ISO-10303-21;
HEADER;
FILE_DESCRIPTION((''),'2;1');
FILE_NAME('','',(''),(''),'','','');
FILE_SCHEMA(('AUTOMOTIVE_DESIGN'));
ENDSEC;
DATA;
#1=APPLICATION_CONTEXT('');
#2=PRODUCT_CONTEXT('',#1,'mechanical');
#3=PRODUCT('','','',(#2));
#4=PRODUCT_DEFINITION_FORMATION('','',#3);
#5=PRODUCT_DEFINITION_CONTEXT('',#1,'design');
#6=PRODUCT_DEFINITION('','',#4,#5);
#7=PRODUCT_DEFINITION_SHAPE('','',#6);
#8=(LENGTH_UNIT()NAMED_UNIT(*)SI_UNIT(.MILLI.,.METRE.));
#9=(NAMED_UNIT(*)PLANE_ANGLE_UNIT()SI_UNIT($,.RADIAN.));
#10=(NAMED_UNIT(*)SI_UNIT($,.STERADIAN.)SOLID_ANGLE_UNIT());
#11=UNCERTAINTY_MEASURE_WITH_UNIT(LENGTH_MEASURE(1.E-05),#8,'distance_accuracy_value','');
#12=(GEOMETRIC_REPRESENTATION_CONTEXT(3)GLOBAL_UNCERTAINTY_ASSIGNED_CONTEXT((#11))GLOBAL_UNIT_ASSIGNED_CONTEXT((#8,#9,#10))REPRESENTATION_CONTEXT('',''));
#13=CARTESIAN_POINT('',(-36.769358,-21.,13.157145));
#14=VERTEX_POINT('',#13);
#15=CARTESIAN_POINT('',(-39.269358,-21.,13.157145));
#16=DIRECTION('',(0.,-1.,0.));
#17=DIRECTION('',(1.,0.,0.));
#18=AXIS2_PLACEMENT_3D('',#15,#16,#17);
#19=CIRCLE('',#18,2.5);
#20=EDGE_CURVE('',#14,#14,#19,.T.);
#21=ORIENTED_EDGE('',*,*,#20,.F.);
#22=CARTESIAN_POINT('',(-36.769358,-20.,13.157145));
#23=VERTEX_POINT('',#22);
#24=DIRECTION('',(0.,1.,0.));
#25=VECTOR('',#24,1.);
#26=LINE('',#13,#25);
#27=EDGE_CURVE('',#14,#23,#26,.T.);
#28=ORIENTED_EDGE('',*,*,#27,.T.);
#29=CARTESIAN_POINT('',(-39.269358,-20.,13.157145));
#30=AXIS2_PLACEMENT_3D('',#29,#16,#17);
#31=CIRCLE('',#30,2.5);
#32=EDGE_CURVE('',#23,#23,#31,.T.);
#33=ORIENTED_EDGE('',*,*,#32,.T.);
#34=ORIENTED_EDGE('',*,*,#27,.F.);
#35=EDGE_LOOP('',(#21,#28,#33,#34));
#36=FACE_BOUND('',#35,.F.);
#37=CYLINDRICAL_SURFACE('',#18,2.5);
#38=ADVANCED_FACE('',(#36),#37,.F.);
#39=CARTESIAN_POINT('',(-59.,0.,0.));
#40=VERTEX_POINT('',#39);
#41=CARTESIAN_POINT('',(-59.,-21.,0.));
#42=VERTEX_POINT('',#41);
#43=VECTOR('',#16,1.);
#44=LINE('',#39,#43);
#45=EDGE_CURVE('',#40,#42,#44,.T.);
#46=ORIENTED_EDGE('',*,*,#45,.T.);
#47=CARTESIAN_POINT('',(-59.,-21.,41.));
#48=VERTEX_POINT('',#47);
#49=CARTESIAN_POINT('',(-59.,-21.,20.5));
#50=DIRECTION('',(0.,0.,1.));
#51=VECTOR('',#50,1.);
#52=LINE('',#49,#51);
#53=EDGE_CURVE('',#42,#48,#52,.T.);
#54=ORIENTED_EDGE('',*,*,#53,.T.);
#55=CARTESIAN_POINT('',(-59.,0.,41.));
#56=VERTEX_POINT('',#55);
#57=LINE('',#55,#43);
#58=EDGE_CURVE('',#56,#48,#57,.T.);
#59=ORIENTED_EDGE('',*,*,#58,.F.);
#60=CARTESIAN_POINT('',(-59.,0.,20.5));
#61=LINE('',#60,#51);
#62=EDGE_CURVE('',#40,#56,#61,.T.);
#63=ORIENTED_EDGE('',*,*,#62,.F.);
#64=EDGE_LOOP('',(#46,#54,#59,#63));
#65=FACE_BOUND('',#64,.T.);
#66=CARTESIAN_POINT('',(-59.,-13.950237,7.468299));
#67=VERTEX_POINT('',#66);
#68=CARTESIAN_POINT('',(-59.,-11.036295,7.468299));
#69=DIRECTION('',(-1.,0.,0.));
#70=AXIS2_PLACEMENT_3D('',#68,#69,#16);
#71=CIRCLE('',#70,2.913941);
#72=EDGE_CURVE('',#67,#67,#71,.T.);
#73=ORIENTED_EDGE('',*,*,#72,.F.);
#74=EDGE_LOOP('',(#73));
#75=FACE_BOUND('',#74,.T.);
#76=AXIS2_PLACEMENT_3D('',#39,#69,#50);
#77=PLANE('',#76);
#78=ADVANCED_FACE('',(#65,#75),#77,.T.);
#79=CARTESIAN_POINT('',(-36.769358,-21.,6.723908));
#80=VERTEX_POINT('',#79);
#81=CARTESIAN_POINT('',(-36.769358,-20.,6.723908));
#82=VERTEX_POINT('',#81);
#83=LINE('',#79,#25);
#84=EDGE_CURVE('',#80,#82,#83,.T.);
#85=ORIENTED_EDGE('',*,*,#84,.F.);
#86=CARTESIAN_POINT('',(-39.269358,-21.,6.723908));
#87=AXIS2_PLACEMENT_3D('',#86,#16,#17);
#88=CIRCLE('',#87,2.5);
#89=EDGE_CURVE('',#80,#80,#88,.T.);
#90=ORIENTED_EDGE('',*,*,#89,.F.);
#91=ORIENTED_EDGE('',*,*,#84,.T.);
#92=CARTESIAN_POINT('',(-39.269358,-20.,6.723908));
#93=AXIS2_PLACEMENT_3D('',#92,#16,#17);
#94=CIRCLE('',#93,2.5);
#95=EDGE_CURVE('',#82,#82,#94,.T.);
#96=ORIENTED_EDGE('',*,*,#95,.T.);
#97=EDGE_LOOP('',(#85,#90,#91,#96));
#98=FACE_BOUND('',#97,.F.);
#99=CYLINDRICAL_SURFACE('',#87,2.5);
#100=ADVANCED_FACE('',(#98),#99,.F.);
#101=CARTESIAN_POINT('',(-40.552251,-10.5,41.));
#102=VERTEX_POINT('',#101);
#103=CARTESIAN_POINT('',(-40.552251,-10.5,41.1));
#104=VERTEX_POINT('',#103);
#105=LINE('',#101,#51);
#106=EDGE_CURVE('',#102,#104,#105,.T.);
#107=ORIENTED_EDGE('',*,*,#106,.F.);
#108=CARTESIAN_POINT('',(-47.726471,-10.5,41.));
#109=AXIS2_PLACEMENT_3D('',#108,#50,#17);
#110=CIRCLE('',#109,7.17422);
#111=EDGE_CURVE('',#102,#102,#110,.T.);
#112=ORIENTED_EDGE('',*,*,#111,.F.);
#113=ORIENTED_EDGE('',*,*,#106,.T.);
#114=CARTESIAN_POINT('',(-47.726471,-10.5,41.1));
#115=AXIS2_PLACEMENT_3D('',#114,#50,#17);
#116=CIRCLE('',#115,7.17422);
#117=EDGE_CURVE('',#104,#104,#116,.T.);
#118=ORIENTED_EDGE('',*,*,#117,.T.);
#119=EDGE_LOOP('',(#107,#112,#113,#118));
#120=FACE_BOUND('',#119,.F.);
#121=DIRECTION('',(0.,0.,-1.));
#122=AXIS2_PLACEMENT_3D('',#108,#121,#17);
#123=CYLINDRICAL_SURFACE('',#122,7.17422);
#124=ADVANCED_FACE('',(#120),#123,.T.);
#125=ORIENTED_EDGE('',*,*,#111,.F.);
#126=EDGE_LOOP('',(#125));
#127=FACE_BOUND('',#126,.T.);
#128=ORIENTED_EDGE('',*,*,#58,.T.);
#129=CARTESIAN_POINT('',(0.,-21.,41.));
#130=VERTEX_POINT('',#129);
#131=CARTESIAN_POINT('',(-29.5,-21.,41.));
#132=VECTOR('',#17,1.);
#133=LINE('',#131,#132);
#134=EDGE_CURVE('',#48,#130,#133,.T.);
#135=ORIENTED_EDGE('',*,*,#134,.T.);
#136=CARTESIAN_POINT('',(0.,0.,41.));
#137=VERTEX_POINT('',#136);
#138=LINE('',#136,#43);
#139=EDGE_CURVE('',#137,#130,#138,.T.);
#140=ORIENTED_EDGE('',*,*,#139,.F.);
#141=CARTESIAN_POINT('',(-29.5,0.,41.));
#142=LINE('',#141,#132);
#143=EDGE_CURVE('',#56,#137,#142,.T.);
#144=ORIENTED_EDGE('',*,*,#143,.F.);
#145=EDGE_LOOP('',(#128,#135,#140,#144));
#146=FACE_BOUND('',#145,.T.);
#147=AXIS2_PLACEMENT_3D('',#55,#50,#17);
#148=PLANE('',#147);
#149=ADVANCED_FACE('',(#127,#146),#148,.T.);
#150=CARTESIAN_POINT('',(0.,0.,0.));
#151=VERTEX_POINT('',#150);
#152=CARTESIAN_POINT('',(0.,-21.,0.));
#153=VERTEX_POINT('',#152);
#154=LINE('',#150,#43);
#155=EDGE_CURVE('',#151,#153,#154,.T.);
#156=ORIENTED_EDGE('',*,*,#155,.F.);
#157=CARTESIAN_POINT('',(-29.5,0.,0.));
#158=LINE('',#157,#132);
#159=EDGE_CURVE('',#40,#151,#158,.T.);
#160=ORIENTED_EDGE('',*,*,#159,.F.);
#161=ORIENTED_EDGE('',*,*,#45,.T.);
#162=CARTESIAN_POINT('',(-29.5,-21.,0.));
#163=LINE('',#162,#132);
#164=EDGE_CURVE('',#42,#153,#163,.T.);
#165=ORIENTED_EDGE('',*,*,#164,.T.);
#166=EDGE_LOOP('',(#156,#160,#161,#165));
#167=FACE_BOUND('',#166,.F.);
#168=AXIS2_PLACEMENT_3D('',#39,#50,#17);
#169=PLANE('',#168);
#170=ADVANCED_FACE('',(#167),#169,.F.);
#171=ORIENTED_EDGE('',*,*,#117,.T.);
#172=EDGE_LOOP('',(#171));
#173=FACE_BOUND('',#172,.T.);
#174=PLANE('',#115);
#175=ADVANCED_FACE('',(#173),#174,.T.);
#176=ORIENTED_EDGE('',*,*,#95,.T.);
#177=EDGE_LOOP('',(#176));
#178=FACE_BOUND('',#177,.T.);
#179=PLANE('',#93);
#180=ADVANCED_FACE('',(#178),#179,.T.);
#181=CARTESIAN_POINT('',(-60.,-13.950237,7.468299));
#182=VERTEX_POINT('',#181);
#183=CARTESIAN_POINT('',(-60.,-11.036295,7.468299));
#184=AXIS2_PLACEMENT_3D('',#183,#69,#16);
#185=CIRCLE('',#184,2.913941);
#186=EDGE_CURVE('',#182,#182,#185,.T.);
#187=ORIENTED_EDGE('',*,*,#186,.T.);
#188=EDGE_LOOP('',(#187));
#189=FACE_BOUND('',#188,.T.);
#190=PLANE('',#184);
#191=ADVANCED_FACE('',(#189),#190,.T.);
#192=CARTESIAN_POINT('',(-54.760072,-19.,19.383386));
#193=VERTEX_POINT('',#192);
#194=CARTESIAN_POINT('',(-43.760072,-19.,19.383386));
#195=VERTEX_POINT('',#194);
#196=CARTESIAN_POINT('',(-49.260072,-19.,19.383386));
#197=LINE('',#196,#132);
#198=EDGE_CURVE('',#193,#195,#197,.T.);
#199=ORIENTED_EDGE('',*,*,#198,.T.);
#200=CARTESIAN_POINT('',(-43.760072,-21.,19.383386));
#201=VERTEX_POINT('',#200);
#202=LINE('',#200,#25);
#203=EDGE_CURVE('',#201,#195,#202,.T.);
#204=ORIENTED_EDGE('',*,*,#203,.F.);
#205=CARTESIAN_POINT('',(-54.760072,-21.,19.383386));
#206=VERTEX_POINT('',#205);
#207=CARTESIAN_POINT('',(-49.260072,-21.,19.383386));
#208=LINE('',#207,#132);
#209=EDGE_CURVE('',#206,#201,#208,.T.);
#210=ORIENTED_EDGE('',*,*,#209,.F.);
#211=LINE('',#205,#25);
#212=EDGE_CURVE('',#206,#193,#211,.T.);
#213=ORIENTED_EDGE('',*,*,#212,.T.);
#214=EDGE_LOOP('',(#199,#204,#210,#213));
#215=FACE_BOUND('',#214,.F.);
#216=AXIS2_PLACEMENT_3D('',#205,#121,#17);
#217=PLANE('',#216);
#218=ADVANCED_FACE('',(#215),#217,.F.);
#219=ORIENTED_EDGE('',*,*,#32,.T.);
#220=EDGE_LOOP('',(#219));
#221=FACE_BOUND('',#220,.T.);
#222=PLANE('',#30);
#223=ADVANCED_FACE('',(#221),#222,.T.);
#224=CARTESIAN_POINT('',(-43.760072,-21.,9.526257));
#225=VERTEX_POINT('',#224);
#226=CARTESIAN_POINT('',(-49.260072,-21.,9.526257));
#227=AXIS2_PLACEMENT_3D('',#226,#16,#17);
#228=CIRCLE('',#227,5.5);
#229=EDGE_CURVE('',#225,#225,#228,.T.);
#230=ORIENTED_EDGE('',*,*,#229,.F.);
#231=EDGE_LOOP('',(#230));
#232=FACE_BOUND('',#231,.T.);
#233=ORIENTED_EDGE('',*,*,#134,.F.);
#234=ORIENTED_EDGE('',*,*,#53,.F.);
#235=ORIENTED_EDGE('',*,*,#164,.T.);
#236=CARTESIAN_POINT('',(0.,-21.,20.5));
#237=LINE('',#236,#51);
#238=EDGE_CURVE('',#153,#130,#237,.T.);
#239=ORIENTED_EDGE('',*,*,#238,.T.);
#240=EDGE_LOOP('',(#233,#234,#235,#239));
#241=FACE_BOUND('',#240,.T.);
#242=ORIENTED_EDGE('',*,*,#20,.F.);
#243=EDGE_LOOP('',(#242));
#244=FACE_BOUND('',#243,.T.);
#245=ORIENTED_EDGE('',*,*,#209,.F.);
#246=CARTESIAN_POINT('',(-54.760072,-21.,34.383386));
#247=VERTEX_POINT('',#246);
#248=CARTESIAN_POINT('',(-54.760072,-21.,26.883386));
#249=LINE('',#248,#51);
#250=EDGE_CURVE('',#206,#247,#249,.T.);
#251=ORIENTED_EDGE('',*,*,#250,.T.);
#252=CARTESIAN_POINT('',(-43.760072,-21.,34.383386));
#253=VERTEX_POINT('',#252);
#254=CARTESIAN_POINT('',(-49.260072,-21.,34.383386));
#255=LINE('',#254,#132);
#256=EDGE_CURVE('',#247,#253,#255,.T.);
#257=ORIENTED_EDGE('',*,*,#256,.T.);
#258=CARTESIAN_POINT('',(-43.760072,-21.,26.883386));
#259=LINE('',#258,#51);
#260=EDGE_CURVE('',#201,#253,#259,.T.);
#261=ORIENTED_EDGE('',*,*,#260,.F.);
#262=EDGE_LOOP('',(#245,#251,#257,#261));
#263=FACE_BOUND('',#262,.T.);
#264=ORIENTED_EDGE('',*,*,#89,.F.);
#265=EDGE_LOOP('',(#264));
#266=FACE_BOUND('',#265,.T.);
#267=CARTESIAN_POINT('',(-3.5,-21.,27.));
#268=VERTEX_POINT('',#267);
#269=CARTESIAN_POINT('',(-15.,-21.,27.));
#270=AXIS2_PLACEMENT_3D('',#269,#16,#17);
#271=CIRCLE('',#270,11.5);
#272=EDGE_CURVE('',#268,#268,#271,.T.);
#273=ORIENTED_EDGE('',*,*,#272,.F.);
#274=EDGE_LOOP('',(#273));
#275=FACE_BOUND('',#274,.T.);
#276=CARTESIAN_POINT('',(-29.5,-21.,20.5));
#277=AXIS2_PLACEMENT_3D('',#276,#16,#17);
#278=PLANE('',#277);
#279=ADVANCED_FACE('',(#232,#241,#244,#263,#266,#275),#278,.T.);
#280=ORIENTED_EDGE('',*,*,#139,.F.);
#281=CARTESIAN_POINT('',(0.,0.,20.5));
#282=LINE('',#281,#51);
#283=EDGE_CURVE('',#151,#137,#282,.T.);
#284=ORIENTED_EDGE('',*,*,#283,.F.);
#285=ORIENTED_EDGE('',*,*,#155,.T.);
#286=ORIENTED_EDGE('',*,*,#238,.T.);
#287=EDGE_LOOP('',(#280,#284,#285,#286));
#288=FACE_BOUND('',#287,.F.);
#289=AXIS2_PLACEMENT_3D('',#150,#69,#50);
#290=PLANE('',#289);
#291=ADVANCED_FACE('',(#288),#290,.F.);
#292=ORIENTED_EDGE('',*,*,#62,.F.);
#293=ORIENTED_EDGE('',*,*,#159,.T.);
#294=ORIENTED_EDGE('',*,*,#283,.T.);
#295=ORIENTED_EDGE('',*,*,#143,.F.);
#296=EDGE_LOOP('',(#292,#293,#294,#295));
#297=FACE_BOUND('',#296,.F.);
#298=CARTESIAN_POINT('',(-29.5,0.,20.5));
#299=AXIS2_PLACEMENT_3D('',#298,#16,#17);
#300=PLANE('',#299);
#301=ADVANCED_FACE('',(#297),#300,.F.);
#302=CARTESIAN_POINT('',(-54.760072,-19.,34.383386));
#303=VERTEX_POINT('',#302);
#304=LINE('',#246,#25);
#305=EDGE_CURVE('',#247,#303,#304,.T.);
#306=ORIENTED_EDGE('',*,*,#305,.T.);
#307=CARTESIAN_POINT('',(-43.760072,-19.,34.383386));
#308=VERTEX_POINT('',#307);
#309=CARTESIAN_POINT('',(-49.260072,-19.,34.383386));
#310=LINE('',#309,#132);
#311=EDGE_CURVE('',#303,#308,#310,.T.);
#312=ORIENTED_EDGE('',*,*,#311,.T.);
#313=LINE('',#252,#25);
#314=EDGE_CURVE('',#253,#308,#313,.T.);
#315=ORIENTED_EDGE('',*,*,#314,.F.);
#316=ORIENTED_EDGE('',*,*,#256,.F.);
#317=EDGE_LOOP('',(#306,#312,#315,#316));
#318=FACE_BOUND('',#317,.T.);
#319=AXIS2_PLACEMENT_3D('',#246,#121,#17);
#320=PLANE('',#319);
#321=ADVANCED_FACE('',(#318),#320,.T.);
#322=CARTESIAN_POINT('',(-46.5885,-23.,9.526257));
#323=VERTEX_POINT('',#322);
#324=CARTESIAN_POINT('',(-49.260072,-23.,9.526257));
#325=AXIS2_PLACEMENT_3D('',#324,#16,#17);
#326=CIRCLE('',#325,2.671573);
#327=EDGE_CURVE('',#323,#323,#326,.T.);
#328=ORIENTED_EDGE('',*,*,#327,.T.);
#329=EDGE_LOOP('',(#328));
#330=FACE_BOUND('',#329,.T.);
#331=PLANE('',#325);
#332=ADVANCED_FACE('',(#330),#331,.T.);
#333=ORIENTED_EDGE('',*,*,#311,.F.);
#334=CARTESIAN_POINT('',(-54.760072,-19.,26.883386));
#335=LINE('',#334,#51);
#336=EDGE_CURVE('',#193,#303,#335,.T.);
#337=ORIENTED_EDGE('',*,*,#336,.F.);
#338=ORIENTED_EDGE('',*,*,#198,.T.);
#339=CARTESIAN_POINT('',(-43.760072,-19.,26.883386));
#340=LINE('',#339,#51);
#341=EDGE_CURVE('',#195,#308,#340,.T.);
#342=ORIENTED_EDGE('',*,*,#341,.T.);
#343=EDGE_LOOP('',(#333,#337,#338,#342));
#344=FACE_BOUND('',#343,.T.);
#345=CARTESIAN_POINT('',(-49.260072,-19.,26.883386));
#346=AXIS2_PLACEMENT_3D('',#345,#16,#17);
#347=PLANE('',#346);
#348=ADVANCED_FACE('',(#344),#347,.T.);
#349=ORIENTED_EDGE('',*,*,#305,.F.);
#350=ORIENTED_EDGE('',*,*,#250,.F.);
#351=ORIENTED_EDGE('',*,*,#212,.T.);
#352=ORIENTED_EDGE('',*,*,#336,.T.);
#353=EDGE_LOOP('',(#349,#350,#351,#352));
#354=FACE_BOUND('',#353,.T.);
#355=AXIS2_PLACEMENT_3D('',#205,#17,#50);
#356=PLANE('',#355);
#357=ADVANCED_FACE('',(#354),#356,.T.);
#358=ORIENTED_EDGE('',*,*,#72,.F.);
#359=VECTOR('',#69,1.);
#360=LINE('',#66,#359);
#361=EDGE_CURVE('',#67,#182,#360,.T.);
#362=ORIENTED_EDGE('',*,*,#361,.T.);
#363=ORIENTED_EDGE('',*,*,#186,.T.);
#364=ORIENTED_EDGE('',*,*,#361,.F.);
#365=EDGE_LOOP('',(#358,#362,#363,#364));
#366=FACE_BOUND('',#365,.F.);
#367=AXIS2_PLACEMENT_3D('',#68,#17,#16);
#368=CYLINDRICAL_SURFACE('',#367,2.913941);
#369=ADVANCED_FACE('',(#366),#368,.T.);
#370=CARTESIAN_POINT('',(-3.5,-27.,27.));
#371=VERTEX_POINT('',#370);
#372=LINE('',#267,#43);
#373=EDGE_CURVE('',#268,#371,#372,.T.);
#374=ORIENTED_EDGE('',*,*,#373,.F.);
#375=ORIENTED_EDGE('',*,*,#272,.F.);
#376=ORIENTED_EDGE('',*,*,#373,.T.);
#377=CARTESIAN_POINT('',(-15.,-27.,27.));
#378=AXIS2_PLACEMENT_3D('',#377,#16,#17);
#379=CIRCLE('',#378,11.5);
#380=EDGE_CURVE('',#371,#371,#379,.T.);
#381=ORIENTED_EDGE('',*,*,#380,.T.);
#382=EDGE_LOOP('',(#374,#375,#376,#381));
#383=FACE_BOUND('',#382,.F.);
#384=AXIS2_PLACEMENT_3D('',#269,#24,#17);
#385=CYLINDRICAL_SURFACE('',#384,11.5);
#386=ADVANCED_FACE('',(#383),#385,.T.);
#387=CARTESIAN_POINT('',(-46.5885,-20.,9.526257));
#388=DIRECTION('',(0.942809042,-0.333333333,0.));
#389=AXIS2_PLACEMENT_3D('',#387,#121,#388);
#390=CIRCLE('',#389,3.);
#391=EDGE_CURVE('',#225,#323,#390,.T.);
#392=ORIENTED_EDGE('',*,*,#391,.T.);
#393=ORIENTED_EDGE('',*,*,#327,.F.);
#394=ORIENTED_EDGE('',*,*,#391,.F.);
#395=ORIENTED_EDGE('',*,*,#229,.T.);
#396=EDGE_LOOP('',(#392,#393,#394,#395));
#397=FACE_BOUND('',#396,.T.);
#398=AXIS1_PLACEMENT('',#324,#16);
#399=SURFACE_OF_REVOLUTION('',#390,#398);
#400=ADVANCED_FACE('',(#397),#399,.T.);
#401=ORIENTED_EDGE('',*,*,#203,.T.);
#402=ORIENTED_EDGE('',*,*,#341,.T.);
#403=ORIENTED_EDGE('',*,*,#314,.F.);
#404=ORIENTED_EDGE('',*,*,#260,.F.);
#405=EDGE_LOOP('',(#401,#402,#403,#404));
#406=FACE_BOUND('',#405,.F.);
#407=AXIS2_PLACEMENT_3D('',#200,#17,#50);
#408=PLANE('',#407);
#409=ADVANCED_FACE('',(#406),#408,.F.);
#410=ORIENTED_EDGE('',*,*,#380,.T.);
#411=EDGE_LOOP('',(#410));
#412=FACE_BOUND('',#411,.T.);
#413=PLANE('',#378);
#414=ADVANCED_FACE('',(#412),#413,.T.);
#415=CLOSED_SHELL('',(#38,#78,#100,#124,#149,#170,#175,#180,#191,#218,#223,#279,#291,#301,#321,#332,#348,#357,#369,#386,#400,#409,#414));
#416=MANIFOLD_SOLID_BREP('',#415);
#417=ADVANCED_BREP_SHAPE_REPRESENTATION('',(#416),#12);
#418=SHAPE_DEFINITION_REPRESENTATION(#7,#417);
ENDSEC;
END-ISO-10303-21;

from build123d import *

# Parameters (mm, degrees)
F0_W      = 59
F0_H      = 41
F1_DEPTH  = 21
F2_R      = 11.5
F3_DEPTH  = 6
F2_W      = 11
F2_H      = 15
F4_DEPTH  = 2
F2_R_2    = 5.5
F5_DEPTH  = 2
F2_R_3    = 2.5
F7_DEPTH  = 1
F8_R      = 2.913941294
F9_DEPTH  = 1
F10_R     = 7.1742199979
F11_DEPTH = 0.1


# Not quite as in the source:
# - a fillet or chamfer that OpenCascade refuses, or shapes differently, is made with other operations: its cross-section is extruded or revolved along the edge and cut away or added
# - a feature of the source that left no trace in its solid (it failed there, or was rolled back) is left out


with BuildPart() as f1:
    # F0 (on Front) → F1 (new body)
    with BuildSketch(Plane.XZ):
        with Locations((-29.5, 20.5)):
            Rectangle(F0_W, F0_H)
    extrude(amount=F1_DEPTH)

    # F2 (on face) → F3 (join)
    with BuildSketch(Plane.XZ.offset(21)):
        with Locations((-15, 27)):
            Circle(F2_R)
    extrude(amount=F3_DEPTH)

    # F2 (on face) → F4 (cut)
    with BuildSketch(Plane.XZ.offset(21)):
        with Locations((-49.2600723803, 26.8833857775)):
            Rectangle(F2_W, F2_H)
    extrude(amount=-F4_DEPTH, mode=Mode.SUBTRACT)

    # F2 (on face) → F5 (join)
    with BuildSketch(Plane.XZ.offset(21)):
        with Locations((-49.2600723803, 9.5262574032)):
            Circle(F2_R_2)
    extrude(amount=F5_DEPTH)

    # F6: fillet of radius 3 on 1 edges, made by hand

    # F6_s1 → F6_t2 (revolve, cut)
    with BuildSketch(Plane.XY.offset(9.5262574032)):
        with BuildLine():
            ThreePointArc((-43.7600723803, -21), (-44.8564486975, -22.4494897428), (-46.5884995051, -23))
            Line((-46.5884995051, -23), (-43.7600723803, -23))
            Line((-43.7600723803, -23), (-43.7600723803, -21))
        make_face()
    revolve(axis=Axis((-49.2600723803, -23, 9.5262574032), (0, -1, 0)), mode=Mode.SUBTRACT)

    # F2 (on face) → F7 (cut)
    with BuildSketch(Plane.XZ.offset(21)):
        with Locations((-39.2693579197, 13.1571451202)):
            Circle(F2_R_3)
        with Locations((-39.2693579197, 6.7239077762)):
            Circle(F2_R_3)
    extrude(amount=-F7_DEPTH, mode=Mode.SUBTRACT)

    # F8 (on face) → F9 (join)
    with BuildSketch(Plane(origin=(-59, 0, 0), x_dir=(0, -1, 0), z_dir=(-1, 0, 0))):
        with Locations((11.0362954438, 7.4682990089)):
            Circle(F8_R)
    extrude(amount=F9_DEPTH)

    # F10 (on face) → F11 (join)
    with BuildSketch(Plane.XY.offset(41)):
        with Locations((-47.7264709771, -10.5)):
            Circle(F10_R)
    extrude(amount=F11_DEPTH)


solid = f1.part
